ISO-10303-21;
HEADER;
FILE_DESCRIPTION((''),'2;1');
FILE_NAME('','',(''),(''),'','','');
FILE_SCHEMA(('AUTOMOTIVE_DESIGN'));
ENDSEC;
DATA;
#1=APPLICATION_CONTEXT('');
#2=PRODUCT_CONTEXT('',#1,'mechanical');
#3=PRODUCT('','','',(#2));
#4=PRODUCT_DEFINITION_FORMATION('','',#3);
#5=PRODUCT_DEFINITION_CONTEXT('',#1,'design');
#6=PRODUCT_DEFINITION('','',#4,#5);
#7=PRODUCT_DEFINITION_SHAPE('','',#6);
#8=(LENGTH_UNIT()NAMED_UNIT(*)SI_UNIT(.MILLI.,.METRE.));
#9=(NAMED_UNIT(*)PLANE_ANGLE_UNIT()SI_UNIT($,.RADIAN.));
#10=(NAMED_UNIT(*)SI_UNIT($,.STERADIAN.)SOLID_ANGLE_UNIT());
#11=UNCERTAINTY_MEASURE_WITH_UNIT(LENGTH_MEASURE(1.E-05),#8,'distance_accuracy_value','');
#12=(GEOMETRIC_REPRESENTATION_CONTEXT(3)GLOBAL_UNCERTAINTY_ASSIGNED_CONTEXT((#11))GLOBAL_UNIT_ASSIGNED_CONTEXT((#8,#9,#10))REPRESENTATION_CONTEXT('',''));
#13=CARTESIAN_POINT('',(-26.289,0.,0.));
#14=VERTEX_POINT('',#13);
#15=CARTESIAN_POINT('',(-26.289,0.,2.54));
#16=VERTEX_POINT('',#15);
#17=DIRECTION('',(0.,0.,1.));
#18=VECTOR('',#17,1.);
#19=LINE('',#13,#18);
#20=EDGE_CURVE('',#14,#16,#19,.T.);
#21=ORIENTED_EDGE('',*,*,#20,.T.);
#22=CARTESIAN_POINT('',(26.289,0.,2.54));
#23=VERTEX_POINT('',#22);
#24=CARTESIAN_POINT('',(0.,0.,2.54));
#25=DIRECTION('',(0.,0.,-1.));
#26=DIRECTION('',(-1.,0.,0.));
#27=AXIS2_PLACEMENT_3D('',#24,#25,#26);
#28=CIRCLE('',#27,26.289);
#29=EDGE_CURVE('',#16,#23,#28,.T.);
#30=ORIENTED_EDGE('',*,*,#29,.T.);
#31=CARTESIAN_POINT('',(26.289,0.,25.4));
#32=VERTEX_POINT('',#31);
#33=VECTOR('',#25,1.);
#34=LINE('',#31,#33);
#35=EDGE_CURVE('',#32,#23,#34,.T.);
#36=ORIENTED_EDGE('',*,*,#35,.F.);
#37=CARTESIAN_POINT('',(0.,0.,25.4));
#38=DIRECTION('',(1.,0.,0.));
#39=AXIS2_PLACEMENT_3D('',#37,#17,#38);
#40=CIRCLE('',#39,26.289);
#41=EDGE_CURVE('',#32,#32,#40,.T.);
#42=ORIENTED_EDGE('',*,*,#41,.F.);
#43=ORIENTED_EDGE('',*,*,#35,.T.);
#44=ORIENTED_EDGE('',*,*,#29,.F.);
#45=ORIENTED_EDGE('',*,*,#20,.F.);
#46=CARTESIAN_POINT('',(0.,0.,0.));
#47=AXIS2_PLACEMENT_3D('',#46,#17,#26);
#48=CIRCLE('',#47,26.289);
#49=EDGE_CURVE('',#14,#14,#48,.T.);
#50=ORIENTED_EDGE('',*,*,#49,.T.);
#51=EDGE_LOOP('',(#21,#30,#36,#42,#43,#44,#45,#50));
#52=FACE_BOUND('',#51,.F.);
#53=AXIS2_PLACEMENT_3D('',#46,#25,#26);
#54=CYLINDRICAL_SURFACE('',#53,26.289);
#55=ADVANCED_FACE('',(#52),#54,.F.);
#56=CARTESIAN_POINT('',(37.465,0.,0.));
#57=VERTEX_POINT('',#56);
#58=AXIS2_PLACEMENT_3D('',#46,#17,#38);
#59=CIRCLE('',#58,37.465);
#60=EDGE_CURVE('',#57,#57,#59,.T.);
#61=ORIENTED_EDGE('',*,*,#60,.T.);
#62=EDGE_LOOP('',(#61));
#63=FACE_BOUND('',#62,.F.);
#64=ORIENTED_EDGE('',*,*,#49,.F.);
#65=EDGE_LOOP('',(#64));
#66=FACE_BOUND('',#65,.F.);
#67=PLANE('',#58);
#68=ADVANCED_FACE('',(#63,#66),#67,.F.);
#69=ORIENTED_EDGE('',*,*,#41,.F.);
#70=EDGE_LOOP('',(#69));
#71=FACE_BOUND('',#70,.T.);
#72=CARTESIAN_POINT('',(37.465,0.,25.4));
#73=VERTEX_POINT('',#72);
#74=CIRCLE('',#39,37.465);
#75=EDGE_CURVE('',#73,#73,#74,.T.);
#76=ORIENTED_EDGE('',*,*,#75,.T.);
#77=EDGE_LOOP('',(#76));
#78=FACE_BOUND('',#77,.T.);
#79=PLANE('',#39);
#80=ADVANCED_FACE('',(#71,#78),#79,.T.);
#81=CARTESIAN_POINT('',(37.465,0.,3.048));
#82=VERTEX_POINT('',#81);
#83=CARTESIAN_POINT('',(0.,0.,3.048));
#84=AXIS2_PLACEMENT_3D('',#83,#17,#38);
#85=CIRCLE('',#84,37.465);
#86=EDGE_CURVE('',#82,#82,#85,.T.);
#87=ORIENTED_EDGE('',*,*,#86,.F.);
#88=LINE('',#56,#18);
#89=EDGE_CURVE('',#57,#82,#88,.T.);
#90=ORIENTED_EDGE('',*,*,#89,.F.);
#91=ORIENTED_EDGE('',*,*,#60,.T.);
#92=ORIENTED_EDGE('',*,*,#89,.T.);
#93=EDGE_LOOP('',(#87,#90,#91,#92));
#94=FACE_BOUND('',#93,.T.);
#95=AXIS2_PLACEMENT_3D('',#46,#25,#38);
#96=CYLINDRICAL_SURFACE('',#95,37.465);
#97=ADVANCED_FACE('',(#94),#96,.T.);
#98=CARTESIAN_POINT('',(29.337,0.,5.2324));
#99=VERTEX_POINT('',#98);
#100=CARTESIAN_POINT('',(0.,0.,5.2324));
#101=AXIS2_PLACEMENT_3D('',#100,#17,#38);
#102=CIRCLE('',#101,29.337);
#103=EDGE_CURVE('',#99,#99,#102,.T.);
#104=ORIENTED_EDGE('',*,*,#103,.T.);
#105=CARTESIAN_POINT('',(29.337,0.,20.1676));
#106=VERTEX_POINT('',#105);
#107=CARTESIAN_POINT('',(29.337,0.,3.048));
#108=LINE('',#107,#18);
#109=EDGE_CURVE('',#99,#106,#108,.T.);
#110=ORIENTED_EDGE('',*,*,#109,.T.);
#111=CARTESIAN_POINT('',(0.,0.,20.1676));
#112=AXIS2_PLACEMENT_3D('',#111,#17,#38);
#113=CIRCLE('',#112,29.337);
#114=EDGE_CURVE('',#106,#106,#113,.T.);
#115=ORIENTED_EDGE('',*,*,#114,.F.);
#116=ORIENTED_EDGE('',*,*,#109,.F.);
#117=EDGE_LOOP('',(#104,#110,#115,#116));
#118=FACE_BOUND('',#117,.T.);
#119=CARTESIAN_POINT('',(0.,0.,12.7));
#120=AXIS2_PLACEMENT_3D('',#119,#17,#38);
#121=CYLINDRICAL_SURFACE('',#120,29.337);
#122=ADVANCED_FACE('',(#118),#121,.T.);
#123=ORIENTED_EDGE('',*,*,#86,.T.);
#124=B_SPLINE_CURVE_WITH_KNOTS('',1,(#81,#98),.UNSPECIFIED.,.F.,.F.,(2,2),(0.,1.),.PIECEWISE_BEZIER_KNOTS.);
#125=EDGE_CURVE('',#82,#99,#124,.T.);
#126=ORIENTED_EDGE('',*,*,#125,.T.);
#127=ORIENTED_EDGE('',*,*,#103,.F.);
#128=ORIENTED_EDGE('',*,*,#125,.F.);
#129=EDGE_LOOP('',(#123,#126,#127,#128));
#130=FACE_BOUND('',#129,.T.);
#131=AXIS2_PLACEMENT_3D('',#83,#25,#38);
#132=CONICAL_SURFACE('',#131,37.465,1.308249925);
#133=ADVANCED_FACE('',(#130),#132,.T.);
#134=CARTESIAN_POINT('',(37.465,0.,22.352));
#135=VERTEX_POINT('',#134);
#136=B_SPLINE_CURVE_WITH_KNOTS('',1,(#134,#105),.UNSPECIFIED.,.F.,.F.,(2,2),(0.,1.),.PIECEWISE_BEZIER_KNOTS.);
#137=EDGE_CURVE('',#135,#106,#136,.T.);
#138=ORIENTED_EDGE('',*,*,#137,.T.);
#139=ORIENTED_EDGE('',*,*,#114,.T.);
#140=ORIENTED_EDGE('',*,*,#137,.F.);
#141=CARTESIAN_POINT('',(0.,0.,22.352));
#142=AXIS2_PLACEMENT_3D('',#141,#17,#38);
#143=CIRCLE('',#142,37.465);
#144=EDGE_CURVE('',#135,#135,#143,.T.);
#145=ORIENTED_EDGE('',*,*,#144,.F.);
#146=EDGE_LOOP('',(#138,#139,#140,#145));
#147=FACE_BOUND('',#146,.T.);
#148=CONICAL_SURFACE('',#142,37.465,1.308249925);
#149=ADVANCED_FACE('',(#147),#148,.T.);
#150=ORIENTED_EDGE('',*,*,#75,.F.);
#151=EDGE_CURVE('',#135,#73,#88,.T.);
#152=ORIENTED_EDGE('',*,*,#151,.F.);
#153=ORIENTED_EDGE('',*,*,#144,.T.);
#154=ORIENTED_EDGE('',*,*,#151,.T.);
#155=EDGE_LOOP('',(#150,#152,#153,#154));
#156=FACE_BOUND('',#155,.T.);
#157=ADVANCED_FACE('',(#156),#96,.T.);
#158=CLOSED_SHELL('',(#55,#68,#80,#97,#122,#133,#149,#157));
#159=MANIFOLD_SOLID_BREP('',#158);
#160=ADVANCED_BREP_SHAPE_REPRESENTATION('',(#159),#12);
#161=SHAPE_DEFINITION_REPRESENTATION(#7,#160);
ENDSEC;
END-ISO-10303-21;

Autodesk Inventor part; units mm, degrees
ref_plane "YZ Plane" through (0, 0, 0) normal (1, 0, 0) x (0, 1, 0)
ref_plane "XZ Plane" through (0, 0, 0) normal (0, 1, 0) x (-1, 0, 0)
sketch "Sketch1" plane through (0, 0, 0) normal (0, 0, 1) x (1, 0, 0)
  circle A0 centre (0, 0) radius 37.465
  dimension "d0" = 74.93
extrude "Extrusion1" add sketch "Sketch1" along normal blind 25.4
sketch "Sketch3" plane through (0, 0, 25.4) normal (0, 0, 1) x (1, 0, 0)
  circle A0 centre (0, 0) radius 26.289
  dimension "d6" = 52.578
extrude "Extrusion3" cut sketch "Sketch3" against normal blind 2.54
sketch "Sketch4" plane through (0, 0, 0) normal (0, 0, -1) x (-1, 0, 0)
  circle A0 centre (0, 0) radius 26.289
  dimension "d9" = 52.578
extrude "Extrusion4" cut sketch "Sketch4" against normal blind 2.54
ref_plane "Work Plane1" through (0, 0, 12.7) normal (0, 0, 1) x (1, 0, 0)
sketch "Sketch5" plane through (0, 0, 12.7) normal (0, 0, 1) x (1, 0, 0)
  circle A0 centre (0, 0) radius 29.337
  circle A1 centre (0, 0) radius 37.465
  dimension "d13" = 58.674
  dimension "d34" = 74.93
extrude "Extrusion5" cut sketch "Sketch5" along normal mid plane 19.304
ref_plane "Work Plane2" through (0, 0, 20.1676) normal (0, 0, 1) x (1, 0, 0)
sketch "Sketch6" plane through (0, 0, 20.1676) normal (0, 0, 1) x (1, 0, 0)
  circle A0 centre (0, 0) radius 29.337
  dimension "d17" = 58.674
loft "Loft1" add profiles "Sketch6" section 1 edges at (-37.465, 0, 22.352)
ref_plane "Work Plane3" through (0, 0, 5.2324) normal (0, 0, 1) x (1, 0, 0)
sketch "Sketch7" plane through (0, 0, 5.2324) normal (0, 0, 1) x (1, 0, 0)
  circle A0 centre (0, 0) radius 29.337
  dimension "d31" = 58.674
loft "Loft3" add profiles "Sketch7" section 1 edges at (-37.465, 0, 3.048)
sketch "Sketch2" plane through (0, 0, 25.4) normal (0, 0, 1) x (1, 0, 0)
  circle A0 centre (0, 0) radius 26.289
  dimension "d3" = 52.578
extrude "Extrusion2" cut sketch "Sketch2" against normal blind 50.8
ref_plane "Work Plane4" through (0, 0, 22.352) normal (0, 0, 1) x (1, 0, 0)
ref_plane "Work Plane5" through (0, 0, 3.048) normal (0, 0, 1) x (1, 0, 0)
properties part number "KF50tube_v2"
